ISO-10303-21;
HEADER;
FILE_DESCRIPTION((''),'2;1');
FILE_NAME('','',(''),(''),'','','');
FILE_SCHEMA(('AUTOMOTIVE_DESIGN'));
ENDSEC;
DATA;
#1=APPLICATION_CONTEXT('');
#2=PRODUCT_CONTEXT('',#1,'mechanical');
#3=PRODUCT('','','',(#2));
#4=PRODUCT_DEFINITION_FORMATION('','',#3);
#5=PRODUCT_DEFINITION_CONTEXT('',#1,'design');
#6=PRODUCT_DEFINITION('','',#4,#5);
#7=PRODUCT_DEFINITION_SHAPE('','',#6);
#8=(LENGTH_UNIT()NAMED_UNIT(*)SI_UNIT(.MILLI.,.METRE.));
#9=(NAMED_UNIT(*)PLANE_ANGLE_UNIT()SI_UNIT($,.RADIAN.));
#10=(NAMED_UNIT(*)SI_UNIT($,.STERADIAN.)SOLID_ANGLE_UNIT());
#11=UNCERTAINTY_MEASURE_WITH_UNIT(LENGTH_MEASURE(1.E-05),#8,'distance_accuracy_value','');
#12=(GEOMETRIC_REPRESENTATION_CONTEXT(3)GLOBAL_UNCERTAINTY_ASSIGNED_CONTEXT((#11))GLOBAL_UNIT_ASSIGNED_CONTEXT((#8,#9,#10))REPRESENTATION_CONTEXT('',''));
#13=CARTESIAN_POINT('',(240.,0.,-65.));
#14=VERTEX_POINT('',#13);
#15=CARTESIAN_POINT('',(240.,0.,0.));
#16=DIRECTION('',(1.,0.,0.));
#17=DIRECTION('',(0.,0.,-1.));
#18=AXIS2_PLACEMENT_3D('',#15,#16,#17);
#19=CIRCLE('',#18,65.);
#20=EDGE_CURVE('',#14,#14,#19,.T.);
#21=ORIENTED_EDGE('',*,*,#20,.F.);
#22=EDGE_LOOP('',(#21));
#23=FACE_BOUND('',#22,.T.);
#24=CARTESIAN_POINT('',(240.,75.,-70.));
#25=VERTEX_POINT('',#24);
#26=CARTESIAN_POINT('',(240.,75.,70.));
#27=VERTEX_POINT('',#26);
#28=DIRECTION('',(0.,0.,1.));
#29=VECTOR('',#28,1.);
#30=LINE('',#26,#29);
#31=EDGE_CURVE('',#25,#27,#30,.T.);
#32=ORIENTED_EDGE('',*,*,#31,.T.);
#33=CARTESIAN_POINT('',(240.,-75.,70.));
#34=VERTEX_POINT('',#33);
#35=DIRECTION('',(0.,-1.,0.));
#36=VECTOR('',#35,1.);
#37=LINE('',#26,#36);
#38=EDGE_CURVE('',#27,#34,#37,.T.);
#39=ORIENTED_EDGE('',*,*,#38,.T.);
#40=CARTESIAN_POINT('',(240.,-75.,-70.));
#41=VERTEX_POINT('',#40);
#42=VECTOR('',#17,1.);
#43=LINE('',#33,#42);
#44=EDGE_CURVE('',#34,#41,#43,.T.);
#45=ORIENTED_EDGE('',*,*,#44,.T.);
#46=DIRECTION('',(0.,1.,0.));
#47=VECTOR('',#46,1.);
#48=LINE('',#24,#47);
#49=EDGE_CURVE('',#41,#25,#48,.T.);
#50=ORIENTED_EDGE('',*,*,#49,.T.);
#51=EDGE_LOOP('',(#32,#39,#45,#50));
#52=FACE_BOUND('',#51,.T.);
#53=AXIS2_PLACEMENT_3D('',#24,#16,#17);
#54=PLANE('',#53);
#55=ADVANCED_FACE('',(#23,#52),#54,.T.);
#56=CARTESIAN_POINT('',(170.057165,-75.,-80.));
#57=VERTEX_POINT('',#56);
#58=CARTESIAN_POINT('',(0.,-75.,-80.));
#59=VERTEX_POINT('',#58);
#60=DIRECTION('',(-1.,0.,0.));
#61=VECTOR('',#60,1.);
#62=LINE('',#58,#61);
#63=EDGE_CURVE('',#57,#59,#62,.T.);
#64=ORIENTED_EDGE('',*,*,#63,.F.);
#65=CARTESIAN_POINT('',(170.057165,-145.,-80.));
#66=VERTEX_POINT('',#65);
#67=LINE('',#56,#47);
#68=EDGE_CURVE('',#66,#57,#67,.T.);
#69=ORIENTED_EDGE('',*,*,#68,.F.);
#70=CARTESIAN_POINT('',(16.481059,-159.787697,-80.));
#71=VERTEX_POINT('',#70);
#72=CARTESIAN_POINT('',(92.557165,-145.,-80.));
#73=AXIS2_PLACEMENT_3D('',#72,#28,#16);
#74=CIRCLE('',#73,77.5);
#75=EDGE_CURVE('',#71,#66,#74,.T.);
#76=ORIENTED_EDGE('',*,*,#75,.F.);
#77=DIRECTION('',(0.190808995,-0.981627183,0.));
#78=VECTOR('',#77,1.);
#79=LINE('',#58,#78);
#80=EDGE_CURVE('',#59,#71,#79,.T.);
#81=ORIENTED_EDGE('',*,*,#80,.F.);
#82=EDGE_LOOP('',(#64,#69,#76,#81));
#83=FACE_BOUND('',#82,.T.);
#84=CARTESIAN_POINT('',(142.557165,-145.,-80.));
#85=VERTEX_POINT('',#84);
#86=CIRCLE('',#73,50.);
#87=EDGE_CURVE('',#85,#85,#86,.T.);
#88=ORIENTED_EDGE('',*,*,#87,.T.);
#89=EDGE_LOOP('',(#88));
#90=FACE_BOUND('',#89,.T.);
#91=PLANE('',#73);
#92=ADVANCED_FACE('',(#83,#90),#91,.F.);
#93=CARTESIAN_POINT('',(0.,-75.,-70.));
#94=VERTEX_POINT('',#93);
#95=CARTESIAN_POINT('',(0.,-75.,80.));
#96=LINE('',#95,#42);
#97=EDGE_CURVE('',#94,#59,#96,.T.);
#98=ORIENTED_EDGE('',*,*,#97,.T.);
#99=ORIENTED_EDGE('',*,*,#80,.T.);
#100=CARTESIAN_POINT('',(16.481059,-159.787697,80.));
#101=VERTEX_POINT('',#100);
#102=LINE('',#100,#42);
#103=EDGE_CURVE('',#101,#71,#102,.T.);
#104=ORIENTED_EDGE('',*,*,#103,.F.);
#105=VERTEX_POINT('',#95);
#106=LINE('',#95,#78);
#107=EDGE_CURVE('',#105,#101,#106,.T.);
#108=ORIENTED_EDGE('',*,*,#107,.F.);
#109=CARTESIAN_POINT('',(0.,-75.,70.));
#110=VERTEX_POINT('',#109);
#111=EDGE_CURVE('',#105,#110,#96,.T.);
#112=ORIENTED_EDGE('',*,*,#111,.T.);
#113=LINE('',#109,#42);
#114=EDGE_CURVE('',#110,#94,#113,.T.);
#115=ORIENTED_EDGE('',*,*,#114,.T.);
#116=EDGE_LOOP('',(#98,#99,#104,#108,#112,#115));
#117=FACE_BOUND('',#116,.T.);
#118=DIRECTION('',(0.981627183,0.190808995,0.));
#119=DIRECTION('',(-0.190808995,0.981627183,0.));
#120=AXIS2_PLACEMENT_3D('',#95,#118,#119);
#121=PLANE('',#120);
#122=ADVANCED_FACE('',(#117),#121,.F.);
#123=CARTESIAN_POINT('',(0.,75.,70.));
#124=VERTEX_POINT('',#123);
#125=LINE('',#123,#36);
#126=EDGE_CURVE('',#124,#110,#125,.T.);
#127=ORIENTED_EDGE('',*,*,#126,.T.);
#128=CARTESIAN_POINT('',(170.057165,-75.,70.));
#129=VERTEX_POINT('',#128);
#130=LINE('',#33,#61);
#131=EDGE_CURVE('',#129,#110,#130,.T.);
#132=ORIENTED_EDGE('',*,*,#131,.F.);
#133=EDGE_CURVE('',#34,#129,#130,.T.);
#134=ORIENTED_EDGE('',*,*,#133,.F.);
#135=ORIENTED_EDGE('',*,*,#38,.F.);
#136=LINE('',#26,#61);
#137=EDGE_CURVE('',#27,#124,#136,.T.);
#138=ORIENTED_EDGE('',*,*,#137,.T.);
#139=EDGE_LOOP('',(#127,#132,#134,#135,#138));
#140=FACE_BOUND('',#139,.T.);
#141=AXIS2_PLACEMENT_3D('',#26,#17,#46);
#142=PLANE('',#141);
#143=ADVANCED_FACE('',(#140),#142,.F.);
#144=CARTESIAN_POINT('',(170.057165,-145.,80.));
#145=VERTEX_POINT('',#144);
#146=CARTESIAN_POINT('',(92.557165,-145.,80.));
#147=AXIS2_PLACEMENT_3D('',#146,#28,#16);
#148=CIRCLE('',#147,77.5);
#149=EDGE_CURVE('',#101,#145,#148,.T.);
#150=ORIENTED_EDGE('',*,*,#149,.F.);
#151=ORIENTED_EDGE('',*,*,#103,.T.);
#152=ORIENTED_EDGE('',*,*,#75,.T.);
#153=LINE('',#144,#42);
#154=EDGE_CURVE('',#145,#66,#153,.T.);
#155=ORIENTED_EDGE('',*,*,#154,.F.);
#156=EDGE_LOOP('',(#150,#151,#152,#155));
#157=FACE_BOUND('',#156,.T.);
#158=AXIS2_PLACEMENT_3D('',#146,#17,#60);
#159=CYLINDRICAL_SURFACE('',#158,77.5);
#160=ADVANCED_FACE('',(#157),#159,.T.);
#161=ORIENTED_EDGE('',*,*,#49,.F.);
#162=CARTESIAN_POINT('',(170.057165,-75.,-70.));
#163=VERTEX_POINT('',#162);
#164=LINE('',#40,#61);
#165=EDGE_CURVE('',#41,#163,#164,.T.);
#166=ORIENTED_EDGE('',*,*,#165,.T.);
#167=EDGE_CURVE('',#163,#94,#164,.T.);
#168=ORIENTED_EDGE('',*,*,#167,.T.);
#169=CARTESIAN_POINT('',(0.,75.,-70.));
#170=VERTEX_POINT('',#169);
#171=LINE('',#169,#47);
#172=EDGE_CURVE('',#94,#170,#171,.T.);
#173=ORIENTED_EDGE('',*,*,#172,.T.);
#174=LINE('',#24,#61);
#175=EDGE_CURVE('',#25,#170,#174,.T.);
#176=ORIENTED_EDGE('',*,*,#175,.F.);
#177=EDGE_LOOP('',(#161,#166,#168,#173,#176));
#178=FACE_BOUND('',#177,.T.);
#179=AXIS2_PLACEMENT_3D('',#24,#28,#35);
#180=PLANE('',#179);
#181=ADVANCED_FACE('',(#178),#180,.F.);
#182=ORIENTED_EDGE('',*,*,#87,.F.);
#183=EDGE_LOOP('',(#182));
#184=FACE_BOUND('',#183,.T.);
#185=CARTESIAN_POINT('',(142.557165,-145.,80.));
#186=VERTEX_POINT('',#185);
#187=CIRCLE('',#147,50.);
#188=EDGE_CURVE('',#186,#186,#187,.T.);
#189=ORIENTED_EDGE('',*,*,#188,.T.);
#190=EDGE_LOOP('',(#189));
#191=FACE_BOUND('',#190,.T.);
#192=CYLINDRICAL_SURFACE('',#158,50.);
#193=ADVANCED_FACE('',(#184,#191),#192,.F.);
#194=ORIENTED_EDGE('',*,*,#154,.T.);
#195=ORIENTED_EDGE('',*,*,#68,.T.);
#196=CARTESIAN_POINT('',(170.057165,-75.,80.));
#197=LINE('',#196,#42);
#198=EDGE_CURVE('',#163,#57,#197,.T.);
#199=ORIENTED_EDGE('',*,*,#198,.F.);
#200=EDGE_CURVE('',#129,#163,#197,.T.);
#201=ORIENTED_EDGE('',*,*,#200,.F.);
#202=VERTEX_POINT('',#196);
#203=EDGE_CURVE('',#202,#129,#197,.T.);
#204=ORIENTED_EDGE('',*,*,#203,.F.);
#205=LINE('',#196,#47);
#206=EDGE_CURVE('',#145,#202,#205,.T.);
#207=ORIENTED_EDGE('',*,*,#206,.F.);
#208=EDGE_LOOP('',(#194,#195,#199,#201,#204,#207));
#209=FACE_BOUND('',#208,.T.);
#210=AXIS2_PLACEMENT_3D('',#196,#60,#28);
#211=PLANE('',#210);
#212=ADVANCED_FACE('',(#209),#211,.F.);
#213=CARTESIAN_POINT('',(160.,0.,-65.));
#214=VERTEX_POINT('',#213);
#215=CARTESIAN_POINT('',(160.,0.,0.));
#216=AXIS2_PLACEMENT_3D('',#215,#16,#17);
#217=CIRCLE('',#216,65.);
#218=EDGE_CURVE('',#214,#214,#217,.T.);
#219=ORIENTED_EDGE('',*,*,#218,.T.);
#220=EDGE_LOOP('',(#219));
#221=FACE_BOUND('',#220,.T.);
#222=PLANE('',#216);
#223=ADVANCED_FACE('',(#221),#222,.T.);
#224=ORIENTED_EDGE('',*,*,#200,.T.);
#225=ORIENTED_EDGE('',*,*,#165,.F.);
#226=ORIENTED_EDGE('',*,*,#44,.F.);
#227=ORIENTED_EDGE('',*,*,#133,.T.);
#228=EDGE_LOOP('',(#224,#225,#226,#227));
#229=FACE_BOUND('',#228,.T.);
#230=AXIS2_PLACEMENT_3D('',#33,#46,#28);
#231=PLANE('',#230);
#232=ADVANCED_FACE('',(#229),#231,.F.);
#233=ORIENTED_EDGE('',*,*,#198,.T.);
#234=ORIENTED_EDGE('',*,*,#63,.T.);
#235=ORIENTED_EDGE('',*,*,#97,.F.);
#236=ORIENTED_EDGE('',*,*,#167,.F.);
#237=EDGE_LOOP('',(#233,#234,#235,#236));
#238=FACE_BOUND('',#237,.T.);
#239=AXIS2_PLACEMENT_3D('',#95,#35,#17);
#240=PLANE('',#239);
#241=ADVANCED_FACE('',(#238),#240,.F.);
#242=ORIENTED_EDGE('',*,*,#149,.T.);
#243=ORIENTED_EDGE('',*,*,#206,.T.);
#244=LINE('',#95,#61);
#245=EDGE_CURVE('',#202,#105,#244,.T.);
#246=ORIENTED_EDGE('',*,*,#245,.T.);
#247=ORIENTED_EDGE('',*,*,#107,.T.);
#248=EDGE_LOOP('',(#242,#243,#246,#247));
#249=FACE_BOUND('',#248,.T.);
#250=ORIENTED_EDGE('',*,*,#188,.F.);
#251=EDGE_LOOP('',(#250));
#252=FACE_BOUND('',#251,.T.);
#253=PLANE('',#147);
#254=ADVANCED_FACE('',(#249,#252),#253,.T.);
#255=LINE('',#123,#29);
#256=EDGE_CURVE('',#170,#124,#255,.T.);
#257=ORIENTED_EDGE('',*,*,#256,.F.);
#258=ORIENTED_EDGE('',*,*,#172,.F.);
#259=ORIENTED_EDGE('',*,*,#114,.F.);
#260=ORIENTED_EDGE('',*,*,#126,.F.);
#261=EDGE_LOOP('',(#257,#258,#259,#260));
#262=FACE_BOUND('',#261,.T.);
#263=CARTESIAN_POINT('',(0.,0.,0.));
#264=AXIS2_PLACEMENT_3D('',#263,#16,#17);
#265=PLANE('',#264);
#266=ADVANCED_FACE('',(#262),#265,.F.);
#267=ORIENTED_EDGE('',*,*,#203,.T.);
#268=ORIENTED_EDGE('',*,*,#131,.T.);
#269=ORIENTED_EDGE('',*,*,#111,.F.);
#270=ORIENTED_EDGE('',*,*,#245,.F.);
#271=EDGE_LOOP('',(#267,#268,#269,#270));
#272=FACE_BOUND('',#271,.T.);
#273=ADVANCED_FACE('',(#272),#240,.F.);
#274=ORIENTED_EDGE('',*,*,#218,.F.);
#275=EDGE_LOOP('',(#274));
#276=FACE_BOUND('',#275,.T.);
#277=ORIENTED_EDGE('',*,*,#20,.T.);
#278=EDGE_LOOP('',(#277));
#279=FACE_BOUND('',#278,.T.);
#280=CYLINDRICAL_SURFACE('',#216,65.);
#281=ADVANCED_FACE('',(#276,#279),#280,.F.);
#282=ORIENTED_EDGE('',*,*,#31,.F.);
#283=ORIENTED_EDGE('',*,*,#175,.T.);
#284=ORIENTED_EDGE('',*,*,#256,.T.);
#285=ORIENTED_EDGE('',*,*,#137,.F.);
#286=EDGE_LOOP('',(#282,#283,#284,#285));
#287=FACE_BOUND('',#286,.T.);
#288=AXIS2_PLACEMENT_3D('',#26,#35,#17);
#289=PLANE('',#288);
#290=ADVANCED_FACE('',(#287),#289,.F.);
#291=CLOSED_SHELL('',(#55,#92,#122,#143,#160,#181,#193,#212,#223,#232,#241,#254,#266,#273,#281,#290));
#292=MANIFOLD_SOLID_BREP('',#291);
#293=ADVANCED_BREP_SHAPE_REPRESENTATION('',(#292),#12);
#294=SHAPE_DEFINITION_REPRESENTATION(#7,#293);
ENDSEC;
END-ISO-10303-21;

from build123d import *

# Parameters (mm, degrees)
STOCK_4_1_START       = -70
STOCK_4_1_OUTLINE_R   = 50
STOCK_4_1_DEPTH       = 140
STOCK_4_1_START_2     = -80
STOCK_4_1_2_OUTLINE_R = 50
STOCK_4_1_2_DEPTH     = 160
SKETCH1_R             = 65
CUT_EXTRUDE1_DEPTH    = 80


# Read off the part's stored shape, not the designer's step: Stock-4-1
with BuildPart() as part:
    # Stock-4-1 outline → Stock-4-1 (new body)
    with BuildSketch(Plane.XY.offset(STOCK_4_1_START)):
        with BuildLine():
            Line((170.057165499, -75), (240, -75))
            Line((240, -75), (240, 75))
            Line((240, 75), (0, 75))
            Line((0, 75), (0, -75))
            Line((0, -75), (16.481058781, -159.787697142))
            ThreePointArc((16.481058781, -159.787697142), (99.985211319, -222.143205373), (170.057165499, -145))
            Line((170.057165499, -145), (170.057165499, -75))
        make_face()
        with Locations((92.557165499, -145)):
            Circle(STOCK_4_1_OUTLINE_R, mode=Mode.SUBTRACT)
    extrude(amount=STOCK_4_1_DEPTH)

    # Stock-4-1 2 outline → Stock-4-1 2 (add)
    with BuildSketch(Plane.XY.offset(STOCK_4_1_START_2)):
        with BuildLine():
            Line((170.057165499, -145), (170.057165499, -75))
            Line((170.057165499, -75), (0, -75))
            Line((0, -75), (16.481058781, -159.787697142))
            ThreePointArc((16.481058781, -159.787697142), (99.985211319, -222.143205373), (170.057165499, -145))
        make_face()
        with Locations((92.557165499, -145)):
            Circle(STOCK_4_1_2_OUTLINE_R, mode=Mode.SUBTRACT)
    extrude(amount=STOCK_4_1_2_DEPTH)

    # Sketch1 → Cut-Extrude1 (cut)
    with BuildSketch(Plane(origin=(240, 0, 0), x_dir=(0, 0, -1), z_dir=(1, 0, 0))):
        Circle(SKETCH1_R)
    extrude(amount=-CUT_EXTRUDE1_DEPTH, mode=Mode.SUBTRACT)


solid = part.part
